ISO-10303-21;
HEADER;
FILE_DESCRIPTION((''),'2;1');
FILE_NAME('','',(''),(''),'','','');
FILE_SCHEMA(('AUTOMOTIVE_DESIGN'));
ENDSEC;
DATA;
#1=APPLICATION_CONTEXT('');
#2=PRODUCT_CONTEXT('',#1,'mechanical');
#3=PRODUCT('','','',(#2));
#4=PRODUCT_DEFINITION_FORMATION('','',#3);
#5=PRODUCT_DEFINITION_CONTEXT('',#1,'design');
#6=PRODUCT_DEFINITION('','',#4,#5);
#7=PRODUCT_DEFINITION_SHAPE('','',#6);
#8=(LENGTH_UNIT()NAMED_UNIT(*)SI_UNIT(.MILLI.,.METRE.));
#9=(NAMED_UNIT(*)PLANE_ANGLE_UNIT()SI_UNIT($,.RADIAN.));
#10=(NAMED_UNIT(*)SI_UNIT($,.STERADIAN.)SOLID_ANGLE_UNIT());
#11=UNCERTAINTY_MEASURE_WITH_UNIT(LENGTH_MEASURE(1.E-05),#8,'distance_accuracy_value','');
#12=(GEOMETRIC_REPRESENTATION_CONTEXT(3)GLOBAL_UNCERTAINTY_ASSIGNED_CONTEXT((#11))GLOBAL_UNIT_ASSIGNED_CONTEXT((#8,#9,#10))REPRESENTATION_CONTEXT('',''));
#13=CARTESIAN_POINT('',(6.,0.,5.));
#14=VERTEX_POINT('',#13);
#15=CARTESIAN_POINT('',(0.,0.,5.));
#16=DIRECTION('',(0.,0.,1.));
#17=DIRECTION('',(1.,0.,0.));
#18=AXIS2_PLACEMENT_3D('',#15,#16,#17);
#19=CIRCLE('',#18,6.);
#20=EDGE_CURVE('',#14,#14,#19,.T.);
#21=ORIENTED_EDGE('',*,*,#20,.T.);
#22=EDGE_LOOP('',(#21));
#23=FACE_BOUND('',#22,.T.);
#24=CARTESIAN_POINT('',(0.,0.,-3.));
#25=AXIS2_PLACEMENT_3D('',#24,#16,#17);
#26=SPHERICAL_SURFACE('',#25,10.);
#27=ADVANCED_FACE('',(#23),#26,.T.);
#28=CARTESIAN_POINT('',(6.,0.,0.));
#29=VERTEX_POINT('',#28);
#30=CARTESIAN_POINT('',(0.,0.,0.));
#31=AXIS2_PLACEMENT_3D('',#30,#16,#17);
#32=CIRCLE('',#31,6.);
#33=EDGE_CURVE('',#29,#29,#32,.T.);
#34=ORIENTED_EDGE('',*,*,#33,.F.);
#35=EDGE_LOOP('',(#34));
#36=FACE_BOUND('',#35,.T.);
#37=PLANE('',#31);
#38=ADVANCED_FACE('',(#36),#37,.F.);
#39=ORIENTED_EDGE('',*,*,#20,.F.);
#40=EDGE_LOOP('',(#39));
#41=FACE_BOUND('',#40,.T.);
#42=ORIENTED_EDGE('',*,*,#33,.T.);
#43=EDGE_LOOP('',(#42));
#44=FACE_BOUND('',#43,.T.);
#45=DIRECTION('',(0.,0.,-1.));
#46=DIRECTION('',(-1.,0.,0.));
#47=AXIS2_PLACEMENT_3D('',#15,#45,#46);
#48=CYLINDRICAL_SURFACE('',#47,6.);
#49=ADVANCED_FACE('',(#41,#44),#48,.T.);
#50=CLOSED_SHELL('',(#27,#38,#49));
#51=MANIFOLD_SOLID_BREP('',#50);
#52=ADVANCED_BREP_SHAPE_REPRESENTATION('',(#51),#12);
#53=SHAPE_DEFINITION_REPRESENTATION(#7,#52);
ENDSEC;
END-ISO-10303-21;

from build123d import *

# Parameters (mm, degrees)
ESQUISSE1_R        = 6
BOSS_EXTRU_1_DEPTH = 5


# Read off the part's stored shape, not the designer's step: Dôme1
with BuildPart() as part:
    # Esquisse1 → Boss.-Extru.1 (new body)
    with BuildSketch(Plane.XY):
        Circle(ESQUISSE1_R)
    extrude(amount=BOSS_EXTRU_1_DEPTH)

    # Dôme1 outline → Dôme1 (revolve)
    with BuildSketch(Plane.XZ):
        with BuildLine():
            Line((0, 5), (6.000000008, 4.999999994))
            ThreePointArc((6.000000008, 4.999999994), (3.162277665, 6.486832979), (0, 7))
            Line((0, 7), (0, 5))
        make_face()
    revolve(axis=Axis((0, 0, 0), (0, 0, 1)))


solid = part.part
